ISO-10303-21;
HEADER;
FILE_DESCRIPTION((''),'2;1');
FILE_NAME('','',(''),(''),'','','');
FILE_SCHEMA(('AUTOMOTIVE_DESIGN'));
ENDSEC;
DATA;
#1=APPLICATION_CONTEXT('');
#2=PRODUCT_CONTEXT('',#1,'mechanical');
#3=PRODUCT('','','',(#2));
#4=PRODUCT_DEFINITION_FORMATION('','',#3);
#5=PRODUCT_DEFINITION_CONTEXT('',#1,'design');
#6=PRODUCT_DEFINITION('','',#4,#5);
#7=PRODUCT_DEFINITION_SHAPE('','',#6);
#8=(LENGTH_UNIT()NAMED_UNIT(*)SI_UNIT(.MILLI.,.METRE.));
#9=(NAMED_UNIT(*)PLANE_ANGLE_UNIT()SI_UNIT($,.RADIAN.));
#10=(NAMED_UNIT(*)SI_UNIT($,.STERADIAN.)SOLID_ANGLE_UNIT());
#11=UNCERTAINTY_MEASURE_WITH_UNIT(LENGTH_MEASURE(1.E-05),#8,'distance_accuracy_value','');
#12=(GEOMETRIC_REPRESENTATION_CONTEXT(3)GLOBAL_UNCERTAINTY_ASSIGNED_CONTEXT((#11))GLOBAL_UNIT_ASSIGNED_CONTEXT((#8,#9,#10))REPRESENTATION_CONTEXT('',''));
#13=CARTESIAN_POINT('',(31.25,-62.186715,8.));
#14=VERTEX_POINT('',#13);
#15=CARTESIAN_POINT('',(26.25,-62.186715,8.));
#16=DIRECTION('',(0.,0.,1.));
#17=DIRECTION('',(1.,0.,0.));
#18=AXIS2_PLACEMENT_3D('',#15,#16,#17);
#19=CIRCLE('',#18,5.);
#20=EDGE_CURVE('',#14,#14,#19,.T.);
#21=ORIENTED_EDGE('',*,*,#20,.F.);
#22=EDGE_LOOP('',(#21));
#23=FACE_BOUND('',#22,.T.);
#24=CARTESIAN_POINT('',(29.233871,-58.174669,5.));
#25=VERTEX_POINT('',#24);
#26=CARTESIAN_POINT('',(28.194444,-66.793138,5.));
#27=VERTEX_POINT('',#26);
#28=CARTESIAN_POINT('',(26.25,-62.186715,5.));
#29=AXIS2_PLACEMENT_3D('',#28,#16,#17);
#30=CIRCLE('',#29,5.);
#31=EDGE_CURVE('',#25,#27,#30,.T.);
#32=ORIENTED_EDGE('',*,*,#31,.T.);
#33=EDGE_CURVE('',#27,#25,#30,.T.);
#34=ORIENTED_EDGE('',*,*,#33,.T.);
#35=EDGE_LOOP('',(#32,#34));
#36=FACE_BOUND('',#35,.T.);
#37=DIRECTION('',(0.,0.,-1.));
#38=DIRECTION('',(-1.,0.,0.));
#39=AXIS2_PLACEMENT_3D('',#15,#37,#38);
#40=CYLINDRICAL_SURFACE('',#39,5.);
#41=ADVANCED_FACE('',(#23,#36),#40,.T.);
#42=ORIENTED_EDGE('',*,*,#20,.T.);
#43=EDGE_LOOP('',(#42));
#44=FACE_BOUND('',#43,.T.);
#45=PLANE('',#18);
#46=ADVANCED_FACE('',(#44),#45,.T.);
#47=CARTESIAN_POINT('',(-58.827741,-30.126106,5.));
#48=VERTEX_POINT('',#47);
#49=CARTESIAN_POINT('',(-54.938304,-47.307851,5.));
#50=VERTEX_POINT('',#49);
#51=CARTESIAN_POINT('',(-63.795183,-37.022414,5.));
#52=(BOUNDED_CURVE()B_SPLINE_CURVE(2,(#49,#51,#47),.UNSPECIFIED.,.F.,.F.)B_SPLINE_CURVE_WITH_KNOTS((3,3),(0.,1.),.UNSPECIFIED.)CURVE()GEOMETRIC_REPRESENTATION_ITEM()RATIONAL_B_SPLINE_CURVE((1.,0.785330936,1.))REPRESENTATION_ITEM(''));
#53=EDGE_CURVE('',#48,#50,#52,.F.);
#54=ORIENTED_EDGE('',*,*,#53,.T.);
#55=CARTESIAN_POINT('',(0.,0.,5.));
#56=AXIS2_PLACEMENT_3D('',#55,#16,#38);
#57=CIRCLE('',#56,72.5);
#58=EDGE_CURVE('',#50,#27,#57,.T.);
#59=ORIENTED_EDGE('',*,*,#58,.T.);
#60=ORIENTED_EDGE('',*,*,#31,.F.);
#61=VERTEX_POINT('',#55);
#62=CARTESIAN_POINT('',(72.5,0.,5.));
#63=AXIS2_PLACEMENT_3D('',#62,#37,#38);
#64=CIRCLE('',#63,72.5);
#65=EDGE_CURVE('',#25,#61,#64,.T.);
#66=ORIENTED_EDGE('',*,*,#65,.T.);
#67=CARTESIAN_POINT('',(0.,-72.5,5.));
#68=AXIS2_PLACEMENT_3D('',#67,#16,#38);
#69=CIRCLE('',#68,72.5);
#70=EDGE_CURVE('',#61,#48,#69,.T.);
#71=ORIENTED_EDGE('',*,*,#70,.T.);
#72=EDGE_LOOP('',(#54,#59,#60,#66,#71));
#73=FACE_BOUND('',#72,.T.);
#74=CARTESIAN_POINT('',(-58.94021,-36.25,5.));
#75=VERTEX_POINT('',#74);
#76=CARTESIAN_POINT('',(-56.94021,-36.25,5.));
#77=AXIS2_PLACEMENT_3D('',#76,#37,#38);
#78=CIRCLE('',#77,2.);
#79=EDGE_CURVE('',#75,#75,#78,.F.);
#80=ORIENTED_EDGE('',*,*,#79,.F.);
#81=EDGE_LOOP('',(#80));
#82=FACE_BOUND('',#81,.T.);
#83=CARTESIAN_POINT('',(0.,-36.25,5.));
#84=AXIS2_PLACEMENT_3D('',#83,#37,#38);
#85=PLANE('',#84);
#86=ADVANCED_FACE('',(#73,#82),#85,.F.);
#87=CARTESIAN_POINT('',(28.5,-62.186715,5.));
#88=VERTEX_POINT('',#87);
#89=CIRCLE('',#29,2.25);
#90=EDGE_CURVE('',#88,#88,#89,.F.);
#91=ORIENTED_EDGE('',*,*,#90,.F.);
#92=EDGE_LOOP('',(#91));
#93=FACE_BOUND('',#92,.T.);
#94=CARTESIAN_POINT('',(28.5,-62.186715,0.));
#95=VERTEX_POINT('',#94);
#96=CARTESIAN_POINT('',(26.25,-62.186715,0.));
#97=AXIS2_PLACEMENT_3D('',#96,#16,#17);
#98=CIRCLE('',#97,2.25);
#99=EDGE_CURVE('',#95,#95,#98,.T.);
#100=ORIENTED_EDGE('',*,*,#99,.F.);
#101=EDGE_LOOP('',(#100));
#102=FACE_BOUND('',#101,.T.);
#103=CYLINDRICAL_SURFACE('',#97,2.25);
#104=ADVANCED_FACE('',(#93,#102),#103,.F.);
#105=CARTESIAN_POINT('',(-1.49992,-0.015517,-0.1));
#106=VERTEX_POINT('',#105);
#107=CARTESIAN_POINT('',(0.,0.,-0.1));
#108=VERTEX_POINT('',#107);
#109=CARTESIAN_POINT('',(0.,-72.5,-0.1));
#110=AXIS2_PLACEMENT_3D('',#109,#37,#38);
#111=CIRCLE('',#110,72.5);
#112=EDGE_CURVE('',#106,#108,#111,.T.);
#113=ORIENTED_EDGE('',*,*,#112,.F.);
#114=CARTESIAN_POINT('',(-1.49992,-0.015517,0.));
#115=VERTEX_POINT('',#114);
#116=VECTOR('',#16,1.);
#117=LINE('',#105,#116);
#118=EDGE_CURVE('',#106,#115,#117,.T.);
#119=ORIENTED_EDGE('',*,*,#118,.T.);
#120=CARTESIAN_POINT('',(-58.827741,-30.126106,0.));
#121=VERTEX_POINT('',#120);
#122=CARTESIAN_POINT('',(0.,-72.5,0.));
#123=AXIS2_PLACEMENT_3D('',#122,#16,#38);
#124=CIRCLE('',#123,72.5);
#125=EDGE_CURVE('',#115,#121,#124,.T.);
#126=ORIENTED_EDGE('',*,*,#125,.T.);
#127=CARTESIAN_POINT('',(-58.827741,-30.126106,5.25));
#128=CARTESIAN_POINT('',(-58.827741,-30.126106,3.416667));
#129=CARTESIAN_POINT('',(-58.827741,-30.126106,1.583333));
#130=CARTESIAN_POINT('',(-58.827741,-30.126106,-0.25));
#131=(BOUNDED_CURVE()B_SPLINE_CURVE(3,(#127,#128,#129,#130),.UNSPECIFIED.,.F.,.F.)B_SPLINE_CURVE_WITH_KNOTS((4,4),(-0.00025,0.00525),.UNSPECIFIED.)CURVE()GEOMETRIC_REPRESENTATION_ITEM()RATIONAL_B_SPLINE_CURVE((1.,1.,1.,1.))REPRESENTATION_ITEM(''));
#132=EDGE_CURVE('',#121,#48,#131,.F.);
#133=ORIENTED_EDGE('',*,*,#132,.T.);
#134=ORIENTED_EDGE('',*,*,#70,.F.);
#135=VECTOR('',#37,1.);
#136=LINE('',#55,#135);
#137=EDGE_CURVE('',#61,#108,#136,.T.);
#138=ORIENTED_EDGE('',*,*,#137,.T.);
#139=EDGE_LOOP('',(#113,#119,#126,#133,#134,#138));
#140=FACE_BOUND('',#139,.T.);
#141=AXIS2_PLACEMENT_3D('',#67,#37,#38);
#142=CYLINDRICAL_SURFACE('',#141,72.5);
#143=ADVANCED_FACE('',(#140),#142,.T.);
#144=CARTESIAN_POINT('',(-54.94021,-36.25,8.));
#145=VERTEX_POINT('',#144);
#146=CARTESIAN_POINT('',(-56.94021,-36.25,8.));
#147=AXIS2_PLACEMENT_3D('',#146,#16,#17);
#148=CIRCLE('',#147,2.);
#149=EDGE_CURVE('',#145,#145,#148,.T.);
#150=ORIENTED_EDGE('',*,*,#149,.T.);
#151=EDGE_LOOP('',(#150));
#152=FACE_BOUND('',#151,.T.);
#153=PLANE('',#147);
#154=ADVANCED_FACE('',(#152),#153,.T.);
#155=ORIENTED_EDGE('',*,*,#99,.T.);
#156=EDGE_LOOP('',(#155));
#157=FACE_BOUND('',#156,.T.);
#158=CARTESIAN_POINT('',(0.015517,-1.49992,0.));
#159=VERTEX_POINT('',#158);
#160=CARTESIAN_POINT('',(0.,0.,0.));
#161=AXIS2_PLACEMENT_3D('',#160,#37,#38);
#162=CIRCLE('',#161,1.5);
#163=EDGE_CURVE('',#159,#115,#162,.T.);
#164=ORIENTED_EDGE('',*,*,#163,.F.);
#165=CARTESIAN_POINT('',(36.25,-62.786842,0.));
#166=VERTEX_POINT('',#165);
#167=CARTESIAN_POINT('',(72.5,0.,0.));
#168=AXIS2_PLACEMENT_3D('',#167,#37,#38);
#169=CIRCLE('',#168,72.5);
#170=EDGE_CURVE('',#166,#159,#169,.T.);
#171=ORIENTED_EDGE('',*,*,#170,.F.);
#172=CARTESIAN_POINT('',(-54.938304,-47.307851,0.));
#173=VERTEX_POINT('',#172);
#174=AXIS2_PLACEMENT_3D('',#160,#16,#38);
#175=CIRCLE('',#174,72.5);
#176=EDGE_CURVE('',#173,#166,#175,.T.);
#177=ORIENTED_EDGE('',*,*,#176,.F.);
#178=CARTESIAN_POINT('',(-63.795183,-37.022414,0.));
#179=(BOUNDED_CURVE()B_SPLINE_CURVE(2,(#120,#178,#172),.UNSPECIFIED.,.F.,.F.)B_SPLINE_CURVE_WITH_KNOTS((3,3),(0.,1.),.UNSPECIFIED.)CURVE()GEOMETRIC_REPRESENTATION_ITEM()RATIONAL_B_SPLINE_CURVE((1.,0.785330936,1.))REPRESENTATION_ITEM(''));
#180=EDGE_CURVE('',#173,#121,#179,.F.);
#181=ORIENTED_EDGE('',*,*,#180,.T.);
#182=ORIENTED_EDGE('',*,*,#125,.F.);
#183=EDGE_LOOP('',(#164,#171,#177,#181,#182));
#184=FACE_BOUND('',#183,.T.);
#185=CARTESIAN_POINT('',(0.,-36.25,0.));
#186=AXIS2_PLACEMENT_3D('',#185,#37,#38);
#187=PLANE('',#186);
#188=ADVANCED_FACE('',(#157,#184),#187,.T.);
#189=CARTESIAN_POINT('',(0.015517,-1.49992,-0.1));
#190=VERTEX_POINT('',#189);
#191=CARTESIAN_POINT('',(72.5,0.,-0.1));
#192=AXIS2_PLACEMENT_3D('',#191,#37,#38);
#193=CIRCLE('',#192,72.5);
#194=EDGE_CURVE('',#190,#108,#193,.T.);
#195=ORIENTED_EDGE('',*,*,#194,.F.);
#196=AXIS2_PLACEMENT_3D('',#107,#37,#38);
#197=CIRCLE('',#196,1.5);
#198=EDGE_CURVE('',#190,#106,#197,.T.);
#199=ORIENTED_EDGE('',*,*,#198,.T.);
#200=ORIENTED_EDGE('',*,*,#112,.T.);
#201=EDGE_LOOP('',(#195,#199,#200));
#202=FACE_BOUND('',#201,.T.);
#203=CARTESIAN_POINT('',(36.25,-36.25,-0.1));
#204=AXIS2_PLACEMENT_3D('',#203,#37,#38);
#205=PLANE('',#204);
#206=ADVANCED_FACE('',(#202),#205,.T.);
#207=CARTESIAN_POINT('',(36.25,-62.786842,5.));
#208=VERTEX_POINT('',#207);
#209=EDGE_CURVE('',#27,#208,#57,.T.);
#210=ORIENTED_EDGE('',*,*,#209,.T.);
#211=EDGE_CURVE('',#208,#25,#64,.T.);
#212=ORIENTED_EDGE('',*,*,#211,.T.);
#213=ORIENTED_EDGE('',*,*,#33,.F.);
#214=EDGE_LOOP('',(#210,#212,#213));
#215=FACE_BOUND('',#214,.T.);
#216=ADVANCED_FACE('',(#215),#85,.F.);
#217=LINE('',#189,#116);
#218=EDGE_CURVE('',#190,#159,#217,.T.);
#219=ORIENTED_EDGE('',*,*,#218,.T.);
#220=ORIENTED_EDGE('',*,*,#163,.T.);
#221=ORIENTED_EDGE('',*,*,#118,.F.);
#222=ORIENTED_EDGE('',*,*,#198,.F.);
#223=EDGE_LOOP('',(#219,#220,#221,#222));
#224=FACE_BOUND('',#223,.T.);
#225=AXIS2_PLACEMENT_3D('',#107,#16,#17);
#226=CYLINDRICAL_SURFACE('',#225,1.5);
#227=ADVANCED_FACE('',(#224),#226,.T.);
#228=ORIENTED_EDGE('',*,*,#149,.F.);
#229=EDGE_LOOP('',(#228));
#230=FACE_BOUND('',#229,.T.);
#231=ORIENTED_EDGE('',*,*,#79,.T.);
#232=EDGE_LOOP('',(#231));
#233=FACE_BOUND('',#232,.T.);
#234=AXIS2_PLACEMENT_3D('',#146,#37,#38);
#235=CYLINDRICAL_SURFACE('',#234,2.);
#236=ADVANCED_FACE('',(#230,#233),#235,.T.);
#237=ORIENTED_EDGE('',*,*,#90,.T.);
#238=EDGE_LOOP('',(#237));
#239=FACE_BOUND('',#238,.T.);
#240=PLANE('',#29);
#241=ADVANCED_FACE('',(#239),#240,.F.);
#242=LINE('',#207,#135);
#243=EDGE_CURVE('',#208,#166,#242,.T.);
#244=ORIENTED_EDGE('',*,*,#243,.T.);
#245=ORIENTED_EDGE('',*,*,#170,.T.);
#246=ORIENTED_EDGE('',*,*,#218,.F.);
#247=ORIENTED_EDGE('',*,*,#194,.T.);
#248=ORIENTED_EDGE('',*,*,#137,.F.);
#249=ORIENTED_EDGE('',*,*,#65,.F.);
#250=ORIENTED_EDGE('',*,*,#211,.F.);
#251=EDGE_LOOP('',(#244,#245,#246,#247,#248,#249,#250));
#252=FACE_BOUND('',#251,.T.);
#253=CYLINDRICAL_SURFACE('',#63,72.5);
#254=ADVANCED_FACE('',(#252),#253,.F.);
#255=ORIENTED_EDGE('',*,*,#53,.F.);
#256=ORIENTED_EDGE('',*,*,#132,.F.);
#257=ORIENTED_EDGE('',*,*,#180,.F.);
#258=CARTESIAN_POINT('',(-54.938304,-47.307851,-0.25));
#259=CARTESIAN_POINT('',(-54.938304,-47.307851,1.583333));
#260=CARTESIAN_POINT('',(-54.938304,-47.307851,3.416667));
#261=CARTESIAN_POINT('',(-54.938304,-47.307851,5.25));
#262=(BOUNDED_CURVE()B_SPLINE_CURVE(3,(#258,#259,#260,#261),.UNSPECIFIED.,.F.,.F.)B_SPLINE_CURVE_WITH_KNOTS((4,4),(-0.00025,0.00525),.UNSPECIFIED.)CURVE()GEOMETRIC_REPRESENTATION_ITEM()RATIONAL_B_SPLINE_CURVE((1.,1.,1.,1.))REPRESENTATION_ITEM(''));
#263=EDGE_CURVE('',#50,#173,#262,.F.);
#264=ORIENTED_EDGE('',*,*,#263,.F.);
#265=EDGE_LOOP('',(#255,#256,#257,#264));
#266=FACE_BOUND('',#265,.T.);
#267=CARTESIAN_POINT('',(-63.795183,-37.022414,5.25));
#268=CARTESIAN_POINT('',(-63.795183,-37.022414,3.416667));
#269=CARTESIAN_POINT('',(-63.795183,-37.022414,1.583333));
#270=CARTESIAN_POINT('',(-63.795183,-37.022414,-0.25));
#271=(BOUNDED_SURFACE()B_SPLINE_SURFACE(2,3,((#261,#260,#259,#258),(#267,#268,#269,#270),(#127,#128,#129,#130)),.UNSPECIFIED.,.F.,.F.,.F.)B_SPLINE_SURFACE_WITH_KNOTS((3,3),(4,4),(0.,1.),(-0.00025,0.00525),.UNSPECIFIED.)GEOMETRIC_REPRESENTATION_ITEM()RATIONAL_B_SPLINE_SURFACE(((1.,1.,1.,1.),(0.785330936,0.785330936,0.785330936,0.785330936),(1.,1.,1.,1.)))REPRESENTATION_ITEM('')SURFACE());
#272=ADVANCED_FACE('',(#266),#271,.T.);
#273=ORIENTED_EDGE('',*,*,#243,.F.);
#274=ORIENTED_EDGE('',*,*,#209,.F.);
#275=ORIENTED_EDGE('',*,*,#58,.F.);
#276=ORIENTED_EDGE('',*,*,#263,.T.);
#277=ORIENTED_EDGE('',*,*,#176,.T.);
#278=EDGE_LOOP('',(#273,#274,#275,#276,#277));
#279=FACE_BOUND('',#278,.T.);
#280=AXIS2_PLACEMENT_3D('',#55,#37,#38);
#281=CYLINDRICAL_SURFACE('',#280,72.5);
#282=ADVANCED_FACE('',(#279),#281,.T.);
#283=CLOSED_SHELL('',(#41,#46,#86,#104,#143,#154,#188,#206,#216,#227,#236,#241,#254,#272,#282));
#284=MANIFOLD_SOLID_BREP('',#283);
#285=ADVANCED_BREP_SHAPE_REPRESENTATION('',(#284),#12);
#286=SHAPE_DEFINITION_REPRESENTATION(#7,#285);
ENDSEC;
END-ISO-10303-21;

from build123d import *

# Parameters (mm, degrees)
ESTRUSIONE_ESTRUSIONE1_DEPTH = 5
SCHIZZO2_R                   = 2
ESTRUSIONE_ESTRUSIONE3_DEPTH = 3
SCHIZZO3_R                   = 2.25
TAGLIO_ESTRUSIONE2_DEPTH     = 5
SCHIZZO4_R                   = 5
ESTRUSIONE_ESTRUSIONE4_DEPTH = 3
ESTRUSIONE_ESTRUSIONE5_START = -5.1
ESTRUSIONE_ESTRUSIONE5_DEPTH = 0.1


with BuildPart() as part:
    # Schizzo1 → Estrusione-Estrusione1 (new body)
    with BuildSketch(Plane.XY):
        with BuildLine():
            ThreePointArc((-62.786841774, -36.25), (-36.25, -9.713158226), (0, 0))
            ThreePointArc((0, 0), (9.713158226, -36.25), (36.25, -62.786841774))
            ThreePointArc((36.25, -62.786841774), (-18.76438077, -70.029622406), (-62.786841774, -36.25))
        make_face()
    extrude(amount=ESTRUSIONE_ESTRUSIONE1_DEPTH)

    # Schizzo2 → Estrusione-Estrusione3 (add)
    with BuildSketch(Plane.XY.offset(5)):
        with Locations(Location((-56.94020987, -36.25, 0), (0, 0, 180))):
            Circle(SCHIZZO2_R)
    extrude(amount=ESTRUSIONE_ESTRUSIONE3_DEPTH)

    # Schizzo3 → Taglio-Estrusione2 (cut)
    with BuildSketch(Plane.XY.offset(5)):
        with Locations((26.25, -62.186714819)):
            Circle(SCHIZZO3_R)
    extrude(amount=-TAGLIO_ESTRUSIONE2_DEPTH, mode=Mode.SUBTRACT)

    # Raccordo2
    # an asymmetric fillet: 16, 12 mm, written as the material it takes off along each edge
    with BuildSketch(Plane(origin=(-62.786841774, -36.25, -33.900186603), x_dir=(0.5787975585185353, -0.8154712663564442, 0), z_dir=(0, 0, 1))) as raccordo2_piece_1:
        with BuildLine():
            Bezier((13.560074641, 0), (0.046255616, -1.269344794), (-2.702341636, 6.773027618), weights=[1, 0.785330936, 1])
            ThreePointArc((-2.702341636, 6.773027618), (-1.43638067, 3.35251629), (0, 0))
            ThreePointArc((0, 0), (6.780037321, -0.317723131), (13.560074641, 0))
        make_face()
    extrude(amount=72.800373207, mode=Mode.SUBTRACT)

    # Schizzo4 → Estrusione-Estrusione4 (add)
    with BuildSketch(Plane.XY.offset(5)):
        with Locations(Location((26.25, -62.186714819, 0), (0, 0, 292.885380476))):
            Circle(SCHIZZO4_R)
    extrude(amount=ESTRUSIONE_ESTRUSIONE4_DEPTH)

    # Schizzo5 → Estrusione-Estrusione5 (add)
    with BuildSketch(Plane.XY.offset(5).offset(ESTRUSIONE_ESTRUSIONE5_START)):
        with BuildLine():
            ThreePointArc((-1.499919736, -0.015517241), (-1.04963107, -1.071575763), (0.015517241, -1.499919736))
            ThreePointArc((0.015517241, -1.499919736), (0.003879414, -0.75), (0, 0))
            ThreePointArc((0, 0), (-0.75, -0.003879414), (-1.499919736, -0.015517241))
        make_face()
    extrude(amount=ESTRUSIONE_ESTRUSIONE5_DEPTH)


solid = part.part
